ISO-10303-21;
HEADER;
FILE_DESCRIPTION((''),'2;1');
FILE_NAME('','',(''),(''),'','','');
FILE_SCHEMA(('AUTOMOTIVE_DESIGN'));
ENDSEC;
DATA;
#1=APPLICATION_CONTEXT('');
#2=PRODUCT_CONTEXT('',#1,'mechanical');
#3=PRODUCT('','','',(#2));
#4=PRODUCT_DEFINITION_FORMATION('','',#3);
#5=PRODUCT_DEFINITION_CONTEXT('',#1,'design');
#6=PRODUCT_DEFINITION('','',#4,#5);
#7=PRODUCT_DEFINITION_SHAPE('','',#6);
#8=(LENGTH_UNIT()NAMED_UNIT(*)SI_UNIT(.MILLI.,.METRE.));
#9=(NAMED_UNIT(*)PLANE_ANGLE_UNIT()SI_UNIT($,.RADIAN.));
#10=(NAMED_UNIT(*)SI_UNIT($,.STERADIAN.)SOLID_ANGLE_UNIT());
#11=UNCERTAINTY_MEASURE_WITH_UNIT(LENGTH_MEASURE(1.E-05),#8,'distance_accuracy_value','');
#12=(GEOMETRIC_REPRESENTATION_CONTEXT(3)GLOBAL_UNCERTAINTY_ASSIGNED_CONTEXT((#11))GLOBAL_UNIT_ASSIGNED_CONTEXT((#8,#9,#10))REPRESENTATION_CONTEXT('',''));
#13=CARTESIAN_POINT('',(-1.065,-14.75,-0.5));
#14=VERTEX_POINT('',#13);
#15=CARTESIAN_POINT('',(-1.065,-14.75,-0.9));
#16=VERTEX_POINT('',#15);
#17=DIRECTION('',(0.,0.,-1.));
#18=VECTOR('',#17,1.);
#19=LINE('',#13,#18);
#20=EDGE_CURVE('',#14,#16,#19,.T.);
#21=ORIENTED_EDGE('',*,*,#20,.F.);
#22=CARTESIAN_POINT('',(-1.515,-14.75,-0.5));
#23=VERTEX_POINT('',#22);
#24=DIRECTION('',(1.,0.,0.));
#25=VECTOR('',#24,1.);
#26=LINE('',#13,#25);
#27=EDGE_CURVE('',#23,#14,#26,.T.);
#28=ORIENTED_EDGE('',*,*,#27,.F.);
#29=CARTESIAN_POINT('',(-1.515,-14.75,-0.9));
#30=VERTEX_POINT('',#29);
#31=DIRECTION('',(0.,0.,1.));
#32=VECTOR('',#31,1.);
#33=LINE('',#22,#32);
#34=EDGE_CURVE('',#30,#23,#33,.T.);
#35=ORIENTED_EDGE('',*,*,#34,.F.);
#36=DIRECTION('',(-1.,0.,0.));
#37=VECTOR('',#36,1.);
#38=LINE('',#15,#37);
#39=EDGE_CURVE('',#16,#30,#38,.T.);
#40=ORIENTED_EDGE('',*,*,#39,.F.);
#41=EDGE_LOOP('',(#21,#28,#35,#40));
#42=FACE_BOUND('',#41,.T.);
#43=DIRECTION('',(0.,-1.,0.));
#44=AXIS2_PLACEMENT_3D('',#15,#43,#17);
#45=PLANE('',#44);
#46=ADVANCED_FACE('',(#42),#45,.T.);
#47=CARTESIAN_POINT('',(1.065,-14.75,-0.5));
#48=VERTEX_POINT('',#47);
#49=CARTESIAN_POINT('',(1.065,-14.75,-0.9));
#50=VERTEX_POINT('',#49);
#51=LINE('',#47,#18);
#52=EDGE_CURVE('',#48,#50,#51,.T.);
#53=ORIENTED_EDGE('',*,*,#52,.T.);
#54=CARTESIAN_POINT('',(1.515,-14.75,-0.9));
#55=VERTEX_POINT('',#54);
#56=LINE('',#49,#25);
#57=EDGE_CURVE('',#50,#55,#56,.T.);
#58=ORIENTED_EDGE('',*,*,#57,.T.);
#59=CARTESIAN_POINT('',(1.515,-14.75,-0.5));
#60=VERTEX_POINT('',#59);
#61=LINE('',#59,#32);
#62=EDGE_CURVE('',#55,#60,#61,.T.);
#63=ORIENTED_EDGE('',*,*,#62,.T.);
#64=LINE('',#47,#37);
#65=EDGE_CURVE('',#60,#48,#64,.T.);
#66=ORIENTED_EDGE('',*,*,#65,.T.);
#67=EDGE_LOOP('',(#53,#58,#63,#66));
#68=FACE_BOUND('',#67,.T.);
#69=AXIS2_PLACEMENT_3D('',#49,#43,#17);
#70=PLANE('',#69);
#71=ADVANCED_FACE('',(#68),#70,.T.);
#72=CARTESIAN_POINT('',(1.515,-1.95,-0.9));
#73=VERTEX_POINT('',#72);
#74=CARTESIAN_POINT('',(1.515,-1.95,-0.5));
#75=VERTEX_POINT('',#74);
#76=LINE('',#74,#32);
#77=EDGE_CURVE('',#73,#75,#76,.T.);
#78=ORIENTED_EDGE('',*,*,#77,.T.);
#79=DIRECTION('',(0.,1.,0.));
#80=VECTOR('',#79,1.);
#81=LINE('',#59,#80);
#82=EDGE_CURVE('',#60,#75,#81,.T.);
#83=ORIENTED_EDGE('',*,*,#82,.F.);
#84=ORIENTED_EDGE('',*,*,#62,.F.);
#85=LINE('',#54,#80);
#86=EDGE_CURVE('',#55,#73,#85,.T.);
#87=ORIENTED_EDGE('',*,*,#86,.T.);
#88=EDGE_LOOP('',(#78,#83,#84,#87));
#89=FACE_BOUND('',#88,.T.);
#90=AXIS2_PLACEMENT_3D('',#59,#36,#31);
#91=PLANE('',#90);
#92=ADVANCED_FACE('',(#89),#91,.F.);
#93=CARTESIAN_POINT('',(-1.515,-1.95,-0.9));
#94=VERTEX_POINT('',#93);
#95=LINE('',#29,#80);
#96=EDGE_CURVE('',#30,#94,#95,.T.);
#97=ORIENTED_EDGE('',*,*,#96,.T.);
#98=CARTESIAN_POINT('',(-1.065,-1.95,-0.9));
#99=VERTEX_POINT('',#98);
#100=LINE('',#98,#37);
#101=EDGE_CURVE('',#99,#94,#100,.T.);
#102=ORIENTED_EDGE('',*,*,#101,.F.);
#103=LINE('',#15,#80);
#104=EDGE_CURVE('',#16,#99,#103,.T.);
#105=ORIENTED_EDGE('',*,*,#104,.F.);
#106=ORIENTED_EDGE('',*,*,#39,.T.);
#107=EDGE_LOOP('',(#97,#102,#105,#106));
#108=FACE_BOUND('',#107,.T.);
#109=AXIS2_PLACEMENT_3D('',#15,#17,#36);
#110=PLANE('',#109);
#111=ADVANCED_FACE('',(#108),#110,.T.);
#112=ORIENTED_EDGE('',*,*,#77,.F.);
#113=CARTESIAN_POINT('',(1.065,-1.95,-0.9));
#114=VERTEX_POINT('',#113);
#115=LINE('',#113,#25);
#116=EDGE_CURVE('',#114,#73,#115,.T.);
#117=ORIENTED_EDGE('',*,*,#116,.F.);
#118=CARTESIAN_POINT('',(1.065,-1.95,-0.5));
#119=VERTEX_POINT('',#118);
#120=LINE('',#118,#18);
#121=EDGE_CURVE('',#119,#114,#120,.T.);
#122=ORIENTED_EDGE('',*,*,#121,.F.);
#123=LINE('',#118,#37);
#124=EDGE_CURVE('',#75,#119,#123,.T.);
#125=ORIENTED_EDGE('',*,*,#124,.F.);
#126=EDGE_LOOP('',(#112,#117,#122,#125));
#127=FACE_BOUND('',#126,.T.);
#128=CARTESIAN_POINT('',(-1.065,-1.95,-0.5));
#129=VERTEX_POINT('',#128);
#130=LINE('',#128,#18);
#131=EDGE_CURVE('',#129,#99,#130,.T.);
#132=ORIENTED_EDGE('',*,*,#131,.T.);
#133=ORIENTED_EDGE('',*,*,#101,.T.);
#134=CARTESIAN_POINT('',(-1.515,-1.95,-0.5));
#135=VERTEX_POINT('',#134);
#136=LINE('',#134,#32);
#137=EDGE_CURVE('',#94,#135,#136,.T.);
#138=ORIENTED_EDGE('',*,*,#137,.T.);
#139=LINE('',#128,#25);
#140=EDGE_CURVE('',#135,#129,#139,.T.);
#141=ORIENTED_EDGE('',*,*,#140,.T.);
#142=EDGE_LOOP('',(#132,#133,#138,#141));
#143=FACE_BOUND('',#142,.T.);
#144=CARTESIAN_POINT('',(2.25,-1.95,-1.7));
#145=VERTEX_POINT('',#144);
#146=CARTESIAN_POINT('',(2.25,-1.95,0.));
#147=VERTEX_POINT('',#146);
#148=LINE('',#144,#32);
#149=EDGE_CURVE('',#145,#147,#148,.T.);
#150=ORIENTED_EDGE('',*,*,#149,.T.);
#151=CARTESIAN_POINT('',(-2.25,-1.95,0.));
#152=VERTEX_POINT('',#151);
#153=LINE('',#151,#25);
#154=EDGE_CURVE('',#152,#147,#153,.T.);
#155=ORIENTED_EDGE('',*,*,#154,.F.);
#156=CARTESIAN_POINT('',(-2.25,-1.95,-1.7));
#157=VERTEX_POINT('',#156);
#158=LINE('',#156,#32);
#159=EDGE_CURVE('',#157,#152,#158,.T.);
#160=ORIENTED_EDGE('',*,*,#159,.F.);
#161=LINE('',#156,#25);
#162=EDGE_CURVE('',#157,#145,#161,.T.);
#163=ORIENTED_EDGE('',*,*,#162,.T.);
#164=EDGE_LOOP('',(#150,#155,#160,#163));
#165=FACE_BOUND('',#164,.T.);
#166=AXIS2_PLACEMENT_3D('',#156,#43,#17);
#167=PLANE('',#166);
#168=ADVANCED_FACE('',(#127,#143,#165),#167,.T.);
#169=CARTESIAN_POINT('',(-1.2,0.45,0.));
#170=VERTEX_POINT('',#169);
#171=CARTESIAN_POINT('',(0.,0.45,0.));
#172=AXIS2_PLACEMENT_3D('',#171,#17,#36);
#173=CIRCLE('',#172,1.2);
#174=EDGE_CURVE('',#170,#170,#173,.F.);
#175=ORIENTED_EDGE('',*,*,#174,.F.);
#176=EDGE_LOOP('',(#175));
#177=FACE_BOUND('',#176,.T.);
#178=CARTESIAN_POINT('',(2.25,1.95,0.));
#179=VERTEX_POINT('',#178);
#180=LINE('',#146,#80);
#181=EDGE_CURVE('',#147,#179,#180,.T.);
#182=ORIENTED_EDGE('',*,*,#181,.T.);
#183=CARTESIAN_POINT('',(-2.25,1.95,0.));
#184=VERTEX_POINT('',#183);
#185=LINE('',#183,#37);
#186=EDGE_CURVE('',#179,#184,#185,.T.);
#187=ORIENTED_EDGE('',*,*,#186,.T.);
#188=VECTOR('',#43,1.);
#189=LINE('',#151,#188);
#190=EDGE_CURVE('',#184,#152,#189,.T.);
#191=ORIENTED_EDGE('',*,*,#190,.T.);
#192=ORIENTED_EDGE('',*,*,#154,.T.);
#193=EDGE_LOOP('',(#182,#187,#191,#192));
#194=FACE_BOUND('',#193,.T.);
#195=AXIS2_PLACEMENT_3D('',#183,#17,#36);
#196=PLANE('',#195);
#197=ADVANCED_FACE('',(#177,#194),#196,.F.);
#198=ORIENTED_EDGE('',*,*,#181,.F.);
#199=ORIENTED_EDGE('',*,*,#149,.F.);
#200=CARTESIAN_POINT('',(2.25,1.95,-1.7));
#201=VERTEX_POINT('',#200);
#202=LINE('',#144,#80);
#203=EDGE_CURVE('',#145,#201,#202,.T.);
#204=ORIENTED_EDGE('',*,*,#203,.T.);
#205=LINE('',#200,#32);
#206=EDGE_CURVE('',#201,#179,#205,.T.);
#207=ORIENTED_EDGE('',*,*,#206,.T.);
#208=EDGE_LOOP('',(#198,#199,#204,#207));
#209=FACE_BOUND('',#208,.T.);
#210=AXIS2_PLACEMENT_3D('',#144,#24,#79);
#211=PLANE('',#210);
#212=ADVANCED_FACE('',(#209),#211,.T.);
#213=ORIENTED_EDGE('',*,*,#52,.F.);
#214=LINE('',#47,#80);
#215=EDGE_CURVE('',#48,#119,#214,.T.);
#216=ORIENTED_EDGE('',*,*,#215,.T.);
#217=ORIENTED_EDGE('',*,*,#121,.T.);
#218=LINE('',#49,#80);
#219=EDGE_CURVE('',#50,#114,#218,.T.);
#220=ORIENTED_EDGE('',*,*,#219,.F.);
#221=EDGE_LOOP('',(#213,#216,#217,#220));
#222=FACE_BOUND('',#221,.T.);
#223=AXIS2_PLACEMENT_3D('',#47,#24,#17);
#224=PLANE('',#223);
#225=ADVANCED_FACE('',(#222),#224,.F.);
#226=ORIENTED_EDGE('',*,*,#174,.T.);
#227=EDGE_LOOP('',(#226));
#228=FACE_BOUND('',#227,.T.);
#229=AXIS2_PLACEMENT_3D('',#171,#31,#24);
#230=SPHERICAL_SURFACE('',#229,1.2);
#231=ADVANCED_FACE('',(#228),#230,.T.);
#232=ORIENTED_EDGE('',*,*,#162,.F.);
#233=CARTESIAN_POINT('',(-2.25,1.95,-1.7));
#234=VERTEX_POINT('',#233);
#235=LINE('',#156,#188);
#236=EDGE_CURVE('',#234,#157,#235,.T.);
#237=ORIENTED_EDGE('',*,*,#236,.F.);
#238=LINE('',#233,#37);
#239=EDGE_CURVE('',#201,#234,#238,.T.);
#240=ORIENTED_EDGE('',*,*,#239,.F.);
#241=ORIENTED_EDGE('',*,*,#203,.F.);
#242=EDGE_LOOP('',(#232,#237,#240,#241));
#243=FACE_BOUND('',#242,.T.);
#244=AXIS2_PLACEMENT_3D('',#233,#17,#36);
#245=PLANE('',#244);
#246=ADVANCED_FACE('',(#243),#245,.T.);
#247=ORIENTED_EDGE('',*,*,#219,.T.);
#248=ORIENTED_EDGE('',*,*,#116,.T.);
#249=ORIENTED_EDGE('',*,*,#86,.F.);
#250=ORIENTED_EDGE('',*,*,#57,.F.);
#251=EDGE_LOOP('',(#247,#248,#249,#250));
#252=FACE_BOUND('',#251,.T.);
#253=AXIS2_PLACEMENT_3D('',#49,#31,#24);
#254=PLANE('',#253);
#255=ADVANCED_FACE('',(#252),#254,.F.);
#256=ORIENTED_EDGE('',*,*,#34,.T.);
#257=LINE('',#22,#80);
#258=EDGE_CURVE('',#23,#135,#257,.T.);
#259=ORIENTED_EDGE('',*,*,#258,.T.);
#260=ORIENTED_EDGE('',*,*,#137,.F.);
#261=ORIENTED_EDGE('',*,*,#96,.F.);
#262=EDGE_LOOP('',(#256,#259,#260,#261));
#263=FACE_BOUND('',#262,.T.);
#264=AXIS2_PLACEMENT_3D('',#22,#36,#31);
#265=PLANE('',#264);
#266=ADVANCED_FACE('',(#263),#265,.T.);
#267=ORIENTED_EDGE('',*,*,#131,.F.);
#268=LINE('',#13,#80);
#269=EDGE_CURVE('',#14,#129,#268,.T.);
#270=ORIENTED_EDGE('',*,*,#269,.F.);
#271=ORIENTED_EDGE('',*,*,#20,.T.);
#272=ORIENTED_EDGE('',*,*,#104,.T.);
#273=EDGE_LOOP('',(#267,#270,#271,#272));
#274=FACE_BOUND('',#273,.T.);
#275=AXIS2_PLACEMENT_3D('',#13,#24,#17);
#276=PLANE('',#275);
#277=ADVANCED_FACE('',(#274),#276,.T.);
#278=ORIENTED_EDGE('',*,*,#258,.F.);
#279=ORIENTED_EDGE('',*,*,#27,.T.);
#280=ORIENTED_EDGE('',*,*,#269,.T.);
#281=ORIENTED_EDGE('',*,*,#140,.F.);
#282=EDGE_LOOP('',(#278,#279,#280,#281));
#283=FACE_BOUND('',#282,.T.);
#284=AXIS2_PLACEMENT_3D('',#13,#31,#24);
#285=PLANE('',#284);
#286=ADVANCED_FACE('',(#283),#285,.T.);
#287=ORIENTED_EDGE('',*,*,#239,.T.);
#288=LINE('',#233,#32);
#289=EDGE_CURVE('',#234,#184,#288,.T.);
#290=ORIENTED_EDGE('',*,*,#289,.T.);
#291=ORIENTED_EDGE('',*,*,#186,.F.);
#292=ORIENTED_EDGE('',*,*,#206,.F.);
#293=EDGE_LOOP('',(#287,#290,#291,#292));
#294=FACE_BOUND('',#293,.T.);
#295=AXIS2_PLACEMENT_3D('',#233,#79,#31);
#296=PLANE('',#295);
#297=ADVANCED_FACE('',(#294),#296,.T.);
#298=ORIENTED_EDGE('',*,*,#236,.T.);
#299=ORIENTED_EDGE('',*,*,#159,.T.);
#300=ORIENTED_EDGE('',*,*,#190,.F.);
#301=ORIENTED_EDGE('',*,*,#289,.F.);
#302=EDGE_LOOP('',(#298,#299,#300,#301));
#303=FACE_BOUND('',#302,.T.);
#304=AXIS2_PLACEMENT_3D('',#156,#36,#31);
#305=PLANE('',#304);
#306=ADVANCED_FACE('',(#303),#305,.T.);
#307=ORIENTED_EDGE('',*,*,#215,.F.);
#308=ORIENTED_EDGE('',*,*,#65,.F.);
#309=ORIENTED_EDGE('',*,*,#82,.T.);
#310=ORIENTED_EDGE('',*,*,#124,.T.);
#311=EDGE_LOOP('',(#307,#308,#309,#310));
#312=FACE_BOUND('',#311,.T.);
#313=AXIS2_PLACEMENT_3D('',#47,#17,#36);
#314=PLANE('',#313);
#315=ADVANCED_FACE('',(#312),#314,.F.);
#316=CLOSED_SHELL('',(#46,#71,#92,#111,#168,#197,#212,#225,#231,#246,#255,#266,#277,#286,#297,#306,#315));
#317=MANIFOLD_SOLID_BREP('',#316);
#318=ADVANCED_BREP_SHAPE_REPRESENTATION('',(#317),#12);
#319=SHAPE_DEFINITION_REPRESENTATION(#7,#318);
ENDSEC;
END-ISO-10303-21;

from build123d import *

# Parameters (mm, degrees)
SKETCH1_W           = 4.5
SKETCH1_H           = 3.9
BOSS_EXTRUDE1_DEPTH = 1.7
SKETCH2_R           = 1.2
BOSS_EXTRUDE2_DEPTH = 1.2
FILLET1_R           = 1.2
SKETCH3_W           = 0.45
SKETCH3_H           = 0.4
BOSS_EXTRUDE3_DEPTH = 12.8


with BuildPart() as part:
    # Sketch1 → Boss-Extrude1 (new body)
    with BuildSketch(Plane.XY):
        Rectangle(SKETCH1_W, SKETCH1_H)
    extrude(amount=-BOSS_EXTRUDE1_DEPTH)

    # Sketch2 → Boss-Extrude2 (add)
    with BuildSketch(Plane.XY):
        with Locations(Location((0, 0.45, 0), (0, 0, 180))):
            Circle(SKETCH2_R)
    extrude(amount=BOSS_EXTRUDE2_DEPTH)

    # Fillet1
    fillet1_edges = [part.edges().sort_by_distance(p)[0] for p in [
        (1.2, 0.45, 1.2),
    ]]
    fillet(fillet1_edges, radius=FILLET1_R - 0.0001)  # a hair under: the kernel refuses the full size

    # Sketch3 → Boss-Extrude3 (add)
    with BuildSketch(Plane.XZ.offset(1.95)):
        with Locations((1.29, -0.7)):
            Rectangle(SKETCH3_W, SKETCH3_H)
    boss_extrude3 = extrude(amount=BOSS_EXTRUDE3_DEPTH)

    # Mirror1: Boss-Extrude3 across plane
    add(boss_extrude3.mirror(Plane(origin=(0, 0, 0), x_dir=(0, 0, 1), z_dir=(1, 0, 0))))


solid = part.part
